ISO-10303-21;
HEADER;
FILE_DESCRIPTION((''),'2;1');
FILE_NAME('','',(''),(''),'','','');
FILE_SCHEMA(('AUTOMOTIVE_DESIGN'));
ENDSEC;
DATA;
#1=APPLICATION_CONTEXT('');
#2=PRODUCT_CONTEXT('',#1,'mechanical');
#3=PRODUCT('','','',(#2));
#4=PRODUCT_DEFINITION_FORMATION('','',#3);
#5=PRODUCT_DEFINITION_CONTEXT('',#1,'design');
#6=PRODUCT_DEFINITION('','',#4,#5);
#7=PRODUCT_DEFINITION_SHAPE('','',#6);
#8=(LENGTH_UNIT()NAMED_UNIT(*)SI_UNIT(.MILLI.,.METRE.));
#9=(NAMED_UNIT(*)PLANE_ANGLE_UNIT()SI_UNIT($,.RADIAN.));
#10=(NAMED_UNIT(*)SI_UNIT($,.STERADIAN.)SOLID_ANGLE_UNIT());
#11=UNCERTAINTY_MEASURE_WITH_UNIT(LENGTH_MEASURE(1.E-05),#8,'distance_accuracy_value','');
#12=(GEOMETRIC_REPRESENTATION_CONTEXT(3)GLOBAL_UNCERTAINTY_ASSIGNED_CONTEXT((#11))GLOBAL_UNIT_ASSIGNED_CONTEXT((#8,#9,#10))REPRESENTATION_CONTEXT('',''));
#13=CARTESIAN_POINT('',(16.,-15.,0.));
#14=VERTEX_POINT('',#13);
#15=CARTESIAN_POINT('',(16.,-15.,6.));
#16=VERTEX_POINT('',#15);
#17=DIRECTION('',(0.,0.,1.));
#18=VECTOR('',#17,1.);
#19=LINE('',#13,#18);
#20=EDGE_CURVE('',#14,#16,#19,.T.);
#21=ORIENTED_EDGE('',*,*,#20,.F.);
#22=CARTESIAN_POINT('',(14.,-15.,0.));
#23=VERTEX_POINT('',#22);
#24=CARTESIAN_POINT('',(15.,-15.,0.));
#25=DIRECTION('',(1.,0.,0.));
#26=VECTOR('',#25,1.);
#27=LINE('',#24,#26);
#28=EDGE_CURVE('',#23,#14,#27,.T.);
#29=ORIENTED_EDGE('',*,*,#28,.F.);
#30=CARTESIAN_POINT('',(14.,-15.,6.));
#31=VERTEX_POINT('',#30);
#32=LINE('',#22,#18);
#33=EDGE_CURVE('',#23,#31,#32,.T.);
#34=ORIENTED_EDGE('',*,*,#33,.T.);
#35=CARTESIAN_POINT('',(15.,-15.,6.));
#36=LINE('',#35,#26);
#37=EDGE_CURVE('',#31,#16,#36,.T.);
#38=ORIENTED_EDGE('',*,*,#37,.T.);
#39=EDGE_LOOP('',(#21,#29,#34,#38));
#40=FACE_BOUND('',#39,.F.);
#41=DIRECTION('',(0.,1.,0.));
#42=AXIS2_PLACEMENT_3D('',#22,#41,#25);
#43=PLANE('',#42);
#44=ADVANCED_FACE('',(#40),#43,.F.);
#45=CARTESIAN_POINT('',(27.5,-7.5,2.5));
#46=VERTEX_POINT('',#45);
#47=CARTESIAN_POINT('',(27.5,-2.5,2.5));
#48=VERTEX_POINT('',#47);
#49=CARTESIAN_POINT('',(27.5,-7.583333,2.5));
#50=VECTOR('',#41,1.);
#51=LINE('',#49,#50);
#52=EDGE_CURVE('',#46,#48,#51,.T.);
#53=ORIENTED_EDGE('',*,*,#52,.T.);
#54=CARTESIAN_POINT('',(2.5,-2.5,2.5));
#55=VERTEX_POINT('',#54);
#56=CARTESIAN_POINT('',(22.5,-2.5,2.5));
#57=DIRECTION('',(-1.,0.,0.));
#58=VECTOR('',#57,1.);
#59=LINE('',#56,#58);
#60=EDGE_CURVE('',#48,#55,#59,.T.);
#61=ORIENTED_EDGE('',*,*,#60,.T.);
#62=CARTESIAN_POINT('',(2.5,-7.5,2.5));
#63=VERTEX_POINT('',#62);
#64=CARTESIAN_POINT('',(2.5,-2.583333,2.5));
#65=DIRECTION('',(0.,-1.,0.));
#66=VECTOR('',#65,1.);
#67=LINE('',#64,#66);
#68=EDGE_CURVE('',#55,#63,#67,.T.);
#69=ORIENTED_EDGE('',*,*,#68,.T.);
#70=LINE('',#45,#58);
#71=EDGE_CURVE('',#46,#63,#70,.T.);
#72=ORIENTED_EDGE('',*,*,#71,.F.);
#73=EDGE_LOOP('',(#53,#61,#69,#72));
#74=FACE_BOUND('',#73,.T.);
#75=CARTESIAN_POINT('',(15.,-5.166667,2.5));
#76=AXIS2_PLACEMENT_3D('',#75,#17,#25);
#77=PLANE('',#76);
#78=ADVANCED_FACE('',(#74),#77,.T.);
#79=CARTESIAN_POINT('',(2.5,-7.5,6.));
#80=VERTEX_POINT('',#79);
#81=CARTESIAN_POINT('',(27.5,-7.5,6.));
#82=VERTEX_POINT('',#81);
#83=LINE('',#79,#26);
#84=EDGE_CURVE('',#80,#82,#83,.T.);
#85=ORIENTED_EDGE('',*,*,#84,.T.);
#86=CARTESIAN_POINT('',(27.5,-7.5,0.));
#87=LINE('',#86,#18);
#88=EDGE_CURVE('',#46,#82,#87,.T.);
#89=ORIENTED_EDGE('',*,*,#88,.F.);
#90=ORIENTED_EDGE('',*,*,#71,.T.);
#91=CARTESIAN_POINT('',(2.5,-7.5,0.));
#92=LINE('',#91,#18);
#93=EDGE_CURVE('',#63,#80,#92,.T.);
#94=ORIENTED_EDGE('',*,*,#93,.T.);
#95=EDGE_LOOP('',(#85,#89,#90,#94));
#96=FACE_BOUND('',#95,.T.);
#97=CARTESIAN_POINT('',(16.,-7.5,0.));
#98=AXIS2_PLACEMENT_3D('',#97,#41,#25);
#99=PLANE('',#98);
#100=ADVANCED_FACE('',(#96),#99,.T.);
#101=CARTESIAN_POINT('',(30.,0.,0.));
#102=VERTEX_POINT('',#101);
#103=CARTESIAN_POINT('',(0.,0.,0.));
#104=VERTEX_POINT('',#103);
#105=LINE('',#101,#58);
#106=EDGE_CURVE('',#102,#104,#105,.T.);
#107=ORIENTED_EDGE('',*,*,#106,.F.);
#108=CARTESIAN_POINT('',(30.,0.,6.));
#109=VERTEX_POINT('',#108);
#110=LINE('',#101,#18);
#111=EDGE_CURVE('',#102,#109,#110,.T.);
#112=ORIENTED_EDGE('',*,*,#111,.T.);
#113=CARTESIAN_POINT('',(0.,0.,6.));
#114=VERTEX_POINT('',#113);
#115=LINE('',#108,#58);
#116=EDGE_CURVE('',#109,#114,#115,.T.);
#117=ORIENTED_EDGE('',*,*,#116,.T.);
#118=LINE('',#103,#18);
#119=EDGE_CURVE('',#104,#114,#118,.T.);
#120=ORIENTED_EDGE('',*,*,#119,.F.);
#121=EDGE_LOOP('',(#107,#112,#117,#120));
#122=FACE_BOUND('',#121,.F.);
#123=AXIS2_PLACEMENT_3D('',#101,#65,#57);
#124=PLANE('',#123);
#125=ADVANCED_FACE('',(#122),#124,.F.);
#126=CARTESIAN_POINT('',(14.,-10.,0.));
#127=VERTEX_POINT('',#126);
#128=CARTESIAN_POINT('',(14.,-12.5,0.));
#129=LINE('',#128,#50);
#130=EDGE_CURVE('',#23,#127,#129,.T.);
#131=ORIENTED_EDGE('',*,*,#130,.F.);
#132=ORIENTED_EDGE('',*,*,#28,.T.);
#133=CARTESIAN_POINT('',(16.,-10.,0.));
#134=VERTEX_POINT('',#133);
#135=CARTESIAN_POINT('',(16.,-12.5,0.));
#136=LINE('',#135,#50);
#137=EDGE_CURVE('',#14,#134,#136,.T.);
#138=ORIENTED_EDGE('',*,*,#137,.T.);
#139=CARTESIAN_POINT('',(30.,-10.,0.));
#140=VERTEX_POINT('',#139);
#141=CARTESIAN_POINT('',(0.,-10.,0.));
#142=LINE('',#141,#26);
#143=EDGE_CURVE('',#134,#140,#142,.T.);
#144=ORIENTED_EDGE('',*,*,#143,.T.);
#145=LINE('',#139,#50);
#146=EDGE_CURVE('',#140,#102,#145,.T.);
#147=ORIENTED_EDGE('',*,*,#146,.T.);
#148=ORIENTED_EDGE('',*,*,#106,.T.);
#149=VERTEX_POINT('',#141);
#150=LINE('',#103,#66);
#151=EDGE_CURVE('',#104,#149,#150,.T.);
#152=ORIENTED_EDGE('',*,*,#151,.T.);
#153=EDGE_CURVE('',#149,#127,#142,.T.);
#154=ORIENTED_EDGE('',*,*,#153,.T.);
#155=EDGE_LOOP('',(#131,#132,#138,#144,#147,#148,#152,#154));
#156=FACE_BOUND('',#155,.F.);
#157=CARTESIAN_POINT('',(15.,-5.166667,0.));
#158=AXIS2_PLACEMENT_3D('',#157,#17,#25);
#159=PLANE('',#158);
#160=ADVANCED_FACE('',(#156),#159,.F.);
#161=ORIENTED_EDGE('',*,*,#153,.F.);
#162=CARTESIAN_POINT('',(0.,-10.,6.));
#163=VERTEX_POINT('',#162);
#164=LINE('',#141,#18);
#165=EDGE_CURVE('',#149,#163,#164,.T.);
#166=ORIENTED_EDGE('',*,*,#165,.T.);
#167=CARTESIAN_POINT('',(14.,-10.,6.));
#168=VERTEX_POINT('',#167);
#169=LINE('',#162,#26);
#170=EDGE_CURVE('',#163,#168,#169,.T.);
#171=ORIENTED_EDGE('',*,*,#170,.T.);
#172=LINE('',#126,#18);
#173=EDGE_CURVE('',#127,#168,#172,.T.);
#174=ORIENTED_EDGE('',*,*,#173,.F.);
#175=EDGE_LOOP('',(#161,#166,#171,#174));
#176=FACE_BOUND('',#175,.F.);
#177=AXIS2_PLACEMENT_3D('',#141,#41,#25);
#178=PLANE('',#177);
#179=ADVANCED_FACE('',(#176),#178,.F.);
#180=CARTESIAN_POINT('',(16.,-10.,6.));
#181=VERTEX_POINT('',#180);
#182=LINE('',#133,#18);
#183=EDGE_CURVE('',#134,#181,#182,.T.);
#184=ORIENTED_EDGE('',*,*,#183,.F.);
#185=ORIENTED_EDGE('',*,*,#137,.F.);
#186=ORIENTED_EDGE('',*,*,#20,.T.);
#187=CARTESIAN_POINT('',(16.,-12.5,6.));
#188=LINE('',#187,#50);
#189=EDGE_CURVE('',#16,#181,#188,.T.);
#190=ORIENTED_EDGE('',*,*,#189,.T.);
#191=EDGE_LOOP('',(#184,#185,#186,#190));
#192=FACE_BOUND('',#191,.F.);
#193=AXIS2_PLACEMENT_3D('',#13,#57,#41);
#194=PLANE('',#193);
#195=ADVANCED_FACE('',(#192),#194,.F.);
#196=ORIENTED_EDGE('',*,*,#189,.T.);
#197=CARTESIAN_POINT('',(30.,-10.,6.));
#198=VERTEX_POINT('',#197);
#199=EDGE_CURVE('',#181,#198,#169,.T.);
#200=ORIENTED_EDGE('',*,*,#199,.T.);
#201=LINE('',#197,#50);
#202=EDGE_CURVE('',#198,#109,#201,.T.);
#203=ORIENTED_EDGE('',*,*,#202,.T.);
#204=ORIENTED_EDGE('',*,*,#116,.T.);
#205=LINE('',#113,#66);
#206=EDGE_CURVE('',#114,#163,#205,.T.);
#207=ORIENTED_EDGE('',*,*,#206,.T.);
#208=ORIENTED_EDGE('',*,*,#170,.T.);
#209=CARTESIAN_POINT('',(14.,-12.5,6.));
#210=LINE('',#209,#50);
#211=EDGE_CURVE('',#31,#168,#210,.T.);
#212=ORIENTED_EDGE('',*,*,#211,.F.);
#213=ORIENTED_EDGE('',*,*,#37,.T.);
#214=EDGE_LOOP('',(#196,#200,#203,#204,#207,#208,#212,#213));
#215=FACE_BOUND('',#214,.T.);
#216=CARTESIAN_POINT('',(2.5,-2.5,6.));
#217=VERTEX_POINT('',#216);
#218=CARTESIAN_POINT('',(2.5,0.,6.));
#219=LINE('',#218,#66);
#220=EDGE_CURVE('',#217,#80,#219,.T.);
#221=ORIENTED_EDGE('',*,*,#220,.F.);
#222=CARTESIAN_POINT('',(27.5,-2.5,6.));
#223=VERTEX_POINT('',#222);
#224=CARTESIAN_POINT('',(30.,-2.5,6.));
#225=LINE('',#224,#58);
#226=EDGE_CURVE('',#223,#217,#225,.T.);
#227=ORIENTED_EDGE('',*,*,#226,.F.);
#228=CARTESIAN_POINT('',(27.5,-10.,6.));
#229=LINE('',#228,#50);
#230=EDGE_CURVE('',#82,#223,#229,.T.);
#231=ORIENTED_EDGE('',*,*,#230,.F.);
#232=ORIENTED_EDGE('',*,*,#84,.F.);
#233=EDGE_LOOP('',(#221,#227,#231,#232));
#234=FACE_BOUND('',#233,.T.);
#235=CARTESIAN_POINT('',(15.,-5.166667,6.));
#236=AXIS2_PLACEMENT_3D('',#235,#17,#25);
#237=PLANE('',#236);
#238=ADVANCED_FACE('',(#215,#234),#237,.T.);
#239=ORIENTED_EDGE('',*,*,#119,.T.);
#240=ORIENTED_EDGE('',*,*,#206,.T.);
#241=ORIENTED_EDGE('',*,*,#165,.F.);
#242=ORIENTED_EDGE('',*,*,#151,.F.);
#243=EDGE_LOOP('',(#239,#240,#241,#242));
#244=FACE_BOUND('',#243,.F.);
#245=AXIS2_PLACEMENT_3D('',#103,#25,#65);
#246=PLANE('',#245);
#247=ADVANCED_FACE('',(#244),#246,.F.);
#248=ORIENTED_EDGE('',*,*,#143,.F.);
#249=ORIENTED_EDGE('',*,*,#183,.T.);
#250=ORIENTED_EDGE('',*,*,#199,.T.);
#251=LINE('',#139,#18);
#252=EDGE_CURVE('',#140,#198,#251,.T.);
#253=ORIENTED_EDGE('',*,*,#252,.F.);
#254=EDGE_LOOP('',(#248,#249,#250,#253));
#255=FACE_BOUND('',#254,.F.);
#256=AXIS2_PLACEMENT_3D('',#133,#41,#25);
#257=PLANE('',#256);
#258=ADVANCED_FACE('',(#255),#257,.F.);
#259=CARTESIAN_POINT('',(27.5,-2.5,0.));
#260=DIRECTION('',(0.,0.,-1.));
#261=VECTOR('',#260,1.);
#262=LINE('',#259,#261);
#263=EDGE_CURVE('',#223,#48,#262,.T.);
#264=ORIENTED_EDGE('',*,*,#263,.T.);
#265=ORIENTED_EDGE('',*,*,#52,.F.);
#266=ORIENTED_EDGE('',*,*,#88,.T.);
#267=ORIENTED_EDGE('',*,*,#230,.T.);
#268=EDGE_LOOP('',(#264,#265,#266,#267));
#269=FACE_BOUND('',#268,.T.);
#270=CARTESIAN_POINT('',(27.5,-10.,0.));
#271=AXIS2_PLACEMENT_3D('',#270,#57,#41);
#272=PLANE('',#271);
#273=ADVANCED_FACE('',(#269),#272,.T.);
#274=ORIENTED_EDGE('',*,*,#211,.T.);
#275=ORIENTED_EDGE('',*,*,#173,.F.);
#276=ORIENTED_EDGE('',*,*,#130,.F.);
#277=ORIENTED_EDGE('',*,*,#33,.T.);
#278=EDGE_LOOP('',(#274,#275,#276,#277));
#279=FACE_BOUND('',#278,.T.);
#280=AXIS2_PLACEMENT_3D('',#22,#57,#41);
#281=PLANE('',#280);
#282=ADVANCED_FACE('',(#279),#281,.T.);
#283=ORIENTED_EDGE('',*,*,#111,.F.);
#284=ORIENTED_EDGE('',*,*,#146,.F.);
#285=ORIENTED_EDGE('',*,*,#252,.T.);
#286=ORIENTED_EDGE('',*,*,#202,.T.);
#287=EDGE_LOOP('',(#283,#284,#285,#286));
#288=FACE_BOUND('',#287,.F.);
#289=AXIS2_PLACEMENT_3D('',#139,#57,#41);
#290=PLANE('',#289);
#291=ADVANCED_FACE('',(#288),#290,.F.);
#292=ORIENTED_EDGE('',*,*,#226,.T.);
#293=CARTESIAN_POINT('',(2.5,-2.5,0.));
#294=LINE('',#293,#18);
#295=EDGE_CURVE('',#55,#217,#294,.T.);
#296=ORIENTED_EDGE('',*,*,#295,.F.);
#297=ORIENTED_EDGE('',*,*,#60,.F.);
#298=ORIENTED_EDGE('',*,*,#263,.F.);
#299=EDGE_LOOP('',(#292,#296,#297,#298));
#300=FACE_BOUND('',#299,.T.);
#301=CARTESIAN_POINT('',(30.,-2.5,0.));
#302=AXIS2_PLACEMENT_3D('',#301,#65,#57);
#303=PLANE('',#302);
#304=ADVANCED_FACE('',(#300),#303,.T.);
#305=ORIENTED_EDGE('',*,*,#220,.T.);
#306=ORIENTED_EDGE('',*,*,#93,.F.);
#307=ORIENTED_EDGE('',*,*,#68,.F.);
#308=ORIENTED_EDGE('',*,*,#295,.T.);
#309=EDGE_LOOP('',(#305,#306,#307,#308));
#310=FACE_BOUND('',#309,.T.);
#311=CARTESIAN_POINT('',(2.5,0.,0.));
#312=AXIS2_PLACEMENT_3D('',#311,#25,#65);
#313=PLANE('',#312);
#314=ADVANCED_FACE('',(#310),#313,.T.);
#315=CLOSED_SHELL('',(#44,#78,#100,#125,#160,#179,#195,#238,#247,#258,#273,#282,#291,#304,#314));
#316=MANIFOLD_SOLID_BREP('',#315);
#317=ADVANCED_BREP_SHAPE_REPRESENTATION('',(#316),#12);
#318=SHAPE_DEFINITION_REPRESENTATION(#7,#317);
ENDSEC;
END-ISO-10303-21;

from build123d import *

# Parameters (mm, degrees)
F0_W        = 2
F0_H        = 5
F1_DEPTH    = 6
F2_T        = 2.5
F2_T3_DEPTH = 11


# Not quite as in the source:
# - a shell that OpenCascade refuses in one call is made with other operations: the cavity is built on its own and cut out


with BuildPart() as f1:
    # F0 (on Top) → F1 (new body)
    with BuildSketch(Plane.XY):
        Polygon((30, 0), (0, 0), (0, -10), (14, -10), (14, -5), (16, -5), (16, -10), (30, -10), align=None)
        with Locations((15, -7.5)):
            Rectangle(F0_W, F0_H)
        with Locations((15, -12.5)):
            Rectangle(F0_W, F0_H)
    extrude(amount=F1_DEPTH)

    # F2: shell of thickness 2.5, made by hand


with BuildPart() as f2_core1:
    # F2_t2: copy of F1
    add(f1.part)

    # the walls: a layer under each face that stays
    f2_faces = [f2_core1.faces().sort_by_distance(p)[0] for p in [
        (15, 0, 3),
        (0, -5, 3),
        (7, -10, 3),
        (14, -12.5, 3),
        (15, -15, 3),
        (16, -12.5, 3),
        (23, -10, 3),
        (30, -5, 3),
        (15, -7.5, 0),
    ]]
    thicken(f2_faces, amount=-F2_T, mode=Mode.SUBTRACT)

    # F2_s4 → F2_t3 (cut)
    with BuildSketch(Plane.XY.offset(-2.5)):
        Polygon((13.975, -10.025), (14, -7.5), (16.5, -7.5), (16.5, -10), align=None)
        Polygon((16.025, -10.025), (13.5, -10), (13.5, -7.5), (16, -7.5), align=None)
    extrude(amount=F2_T3_DEPTH, mode=Mode.SUBTRACT)


with BuildPart() as f1_1:
    add(f1.part)

    # what is left inside the walls is the cavity
    f2_cavity = [f2_core1.part.solids().sort_by_distance(p)[0] for p in [
        (15, -5.833333, 5.975),
    ]]
    add(f2_cavity, mode=Mode.SUBTRACT)


solid = f1_1.part
